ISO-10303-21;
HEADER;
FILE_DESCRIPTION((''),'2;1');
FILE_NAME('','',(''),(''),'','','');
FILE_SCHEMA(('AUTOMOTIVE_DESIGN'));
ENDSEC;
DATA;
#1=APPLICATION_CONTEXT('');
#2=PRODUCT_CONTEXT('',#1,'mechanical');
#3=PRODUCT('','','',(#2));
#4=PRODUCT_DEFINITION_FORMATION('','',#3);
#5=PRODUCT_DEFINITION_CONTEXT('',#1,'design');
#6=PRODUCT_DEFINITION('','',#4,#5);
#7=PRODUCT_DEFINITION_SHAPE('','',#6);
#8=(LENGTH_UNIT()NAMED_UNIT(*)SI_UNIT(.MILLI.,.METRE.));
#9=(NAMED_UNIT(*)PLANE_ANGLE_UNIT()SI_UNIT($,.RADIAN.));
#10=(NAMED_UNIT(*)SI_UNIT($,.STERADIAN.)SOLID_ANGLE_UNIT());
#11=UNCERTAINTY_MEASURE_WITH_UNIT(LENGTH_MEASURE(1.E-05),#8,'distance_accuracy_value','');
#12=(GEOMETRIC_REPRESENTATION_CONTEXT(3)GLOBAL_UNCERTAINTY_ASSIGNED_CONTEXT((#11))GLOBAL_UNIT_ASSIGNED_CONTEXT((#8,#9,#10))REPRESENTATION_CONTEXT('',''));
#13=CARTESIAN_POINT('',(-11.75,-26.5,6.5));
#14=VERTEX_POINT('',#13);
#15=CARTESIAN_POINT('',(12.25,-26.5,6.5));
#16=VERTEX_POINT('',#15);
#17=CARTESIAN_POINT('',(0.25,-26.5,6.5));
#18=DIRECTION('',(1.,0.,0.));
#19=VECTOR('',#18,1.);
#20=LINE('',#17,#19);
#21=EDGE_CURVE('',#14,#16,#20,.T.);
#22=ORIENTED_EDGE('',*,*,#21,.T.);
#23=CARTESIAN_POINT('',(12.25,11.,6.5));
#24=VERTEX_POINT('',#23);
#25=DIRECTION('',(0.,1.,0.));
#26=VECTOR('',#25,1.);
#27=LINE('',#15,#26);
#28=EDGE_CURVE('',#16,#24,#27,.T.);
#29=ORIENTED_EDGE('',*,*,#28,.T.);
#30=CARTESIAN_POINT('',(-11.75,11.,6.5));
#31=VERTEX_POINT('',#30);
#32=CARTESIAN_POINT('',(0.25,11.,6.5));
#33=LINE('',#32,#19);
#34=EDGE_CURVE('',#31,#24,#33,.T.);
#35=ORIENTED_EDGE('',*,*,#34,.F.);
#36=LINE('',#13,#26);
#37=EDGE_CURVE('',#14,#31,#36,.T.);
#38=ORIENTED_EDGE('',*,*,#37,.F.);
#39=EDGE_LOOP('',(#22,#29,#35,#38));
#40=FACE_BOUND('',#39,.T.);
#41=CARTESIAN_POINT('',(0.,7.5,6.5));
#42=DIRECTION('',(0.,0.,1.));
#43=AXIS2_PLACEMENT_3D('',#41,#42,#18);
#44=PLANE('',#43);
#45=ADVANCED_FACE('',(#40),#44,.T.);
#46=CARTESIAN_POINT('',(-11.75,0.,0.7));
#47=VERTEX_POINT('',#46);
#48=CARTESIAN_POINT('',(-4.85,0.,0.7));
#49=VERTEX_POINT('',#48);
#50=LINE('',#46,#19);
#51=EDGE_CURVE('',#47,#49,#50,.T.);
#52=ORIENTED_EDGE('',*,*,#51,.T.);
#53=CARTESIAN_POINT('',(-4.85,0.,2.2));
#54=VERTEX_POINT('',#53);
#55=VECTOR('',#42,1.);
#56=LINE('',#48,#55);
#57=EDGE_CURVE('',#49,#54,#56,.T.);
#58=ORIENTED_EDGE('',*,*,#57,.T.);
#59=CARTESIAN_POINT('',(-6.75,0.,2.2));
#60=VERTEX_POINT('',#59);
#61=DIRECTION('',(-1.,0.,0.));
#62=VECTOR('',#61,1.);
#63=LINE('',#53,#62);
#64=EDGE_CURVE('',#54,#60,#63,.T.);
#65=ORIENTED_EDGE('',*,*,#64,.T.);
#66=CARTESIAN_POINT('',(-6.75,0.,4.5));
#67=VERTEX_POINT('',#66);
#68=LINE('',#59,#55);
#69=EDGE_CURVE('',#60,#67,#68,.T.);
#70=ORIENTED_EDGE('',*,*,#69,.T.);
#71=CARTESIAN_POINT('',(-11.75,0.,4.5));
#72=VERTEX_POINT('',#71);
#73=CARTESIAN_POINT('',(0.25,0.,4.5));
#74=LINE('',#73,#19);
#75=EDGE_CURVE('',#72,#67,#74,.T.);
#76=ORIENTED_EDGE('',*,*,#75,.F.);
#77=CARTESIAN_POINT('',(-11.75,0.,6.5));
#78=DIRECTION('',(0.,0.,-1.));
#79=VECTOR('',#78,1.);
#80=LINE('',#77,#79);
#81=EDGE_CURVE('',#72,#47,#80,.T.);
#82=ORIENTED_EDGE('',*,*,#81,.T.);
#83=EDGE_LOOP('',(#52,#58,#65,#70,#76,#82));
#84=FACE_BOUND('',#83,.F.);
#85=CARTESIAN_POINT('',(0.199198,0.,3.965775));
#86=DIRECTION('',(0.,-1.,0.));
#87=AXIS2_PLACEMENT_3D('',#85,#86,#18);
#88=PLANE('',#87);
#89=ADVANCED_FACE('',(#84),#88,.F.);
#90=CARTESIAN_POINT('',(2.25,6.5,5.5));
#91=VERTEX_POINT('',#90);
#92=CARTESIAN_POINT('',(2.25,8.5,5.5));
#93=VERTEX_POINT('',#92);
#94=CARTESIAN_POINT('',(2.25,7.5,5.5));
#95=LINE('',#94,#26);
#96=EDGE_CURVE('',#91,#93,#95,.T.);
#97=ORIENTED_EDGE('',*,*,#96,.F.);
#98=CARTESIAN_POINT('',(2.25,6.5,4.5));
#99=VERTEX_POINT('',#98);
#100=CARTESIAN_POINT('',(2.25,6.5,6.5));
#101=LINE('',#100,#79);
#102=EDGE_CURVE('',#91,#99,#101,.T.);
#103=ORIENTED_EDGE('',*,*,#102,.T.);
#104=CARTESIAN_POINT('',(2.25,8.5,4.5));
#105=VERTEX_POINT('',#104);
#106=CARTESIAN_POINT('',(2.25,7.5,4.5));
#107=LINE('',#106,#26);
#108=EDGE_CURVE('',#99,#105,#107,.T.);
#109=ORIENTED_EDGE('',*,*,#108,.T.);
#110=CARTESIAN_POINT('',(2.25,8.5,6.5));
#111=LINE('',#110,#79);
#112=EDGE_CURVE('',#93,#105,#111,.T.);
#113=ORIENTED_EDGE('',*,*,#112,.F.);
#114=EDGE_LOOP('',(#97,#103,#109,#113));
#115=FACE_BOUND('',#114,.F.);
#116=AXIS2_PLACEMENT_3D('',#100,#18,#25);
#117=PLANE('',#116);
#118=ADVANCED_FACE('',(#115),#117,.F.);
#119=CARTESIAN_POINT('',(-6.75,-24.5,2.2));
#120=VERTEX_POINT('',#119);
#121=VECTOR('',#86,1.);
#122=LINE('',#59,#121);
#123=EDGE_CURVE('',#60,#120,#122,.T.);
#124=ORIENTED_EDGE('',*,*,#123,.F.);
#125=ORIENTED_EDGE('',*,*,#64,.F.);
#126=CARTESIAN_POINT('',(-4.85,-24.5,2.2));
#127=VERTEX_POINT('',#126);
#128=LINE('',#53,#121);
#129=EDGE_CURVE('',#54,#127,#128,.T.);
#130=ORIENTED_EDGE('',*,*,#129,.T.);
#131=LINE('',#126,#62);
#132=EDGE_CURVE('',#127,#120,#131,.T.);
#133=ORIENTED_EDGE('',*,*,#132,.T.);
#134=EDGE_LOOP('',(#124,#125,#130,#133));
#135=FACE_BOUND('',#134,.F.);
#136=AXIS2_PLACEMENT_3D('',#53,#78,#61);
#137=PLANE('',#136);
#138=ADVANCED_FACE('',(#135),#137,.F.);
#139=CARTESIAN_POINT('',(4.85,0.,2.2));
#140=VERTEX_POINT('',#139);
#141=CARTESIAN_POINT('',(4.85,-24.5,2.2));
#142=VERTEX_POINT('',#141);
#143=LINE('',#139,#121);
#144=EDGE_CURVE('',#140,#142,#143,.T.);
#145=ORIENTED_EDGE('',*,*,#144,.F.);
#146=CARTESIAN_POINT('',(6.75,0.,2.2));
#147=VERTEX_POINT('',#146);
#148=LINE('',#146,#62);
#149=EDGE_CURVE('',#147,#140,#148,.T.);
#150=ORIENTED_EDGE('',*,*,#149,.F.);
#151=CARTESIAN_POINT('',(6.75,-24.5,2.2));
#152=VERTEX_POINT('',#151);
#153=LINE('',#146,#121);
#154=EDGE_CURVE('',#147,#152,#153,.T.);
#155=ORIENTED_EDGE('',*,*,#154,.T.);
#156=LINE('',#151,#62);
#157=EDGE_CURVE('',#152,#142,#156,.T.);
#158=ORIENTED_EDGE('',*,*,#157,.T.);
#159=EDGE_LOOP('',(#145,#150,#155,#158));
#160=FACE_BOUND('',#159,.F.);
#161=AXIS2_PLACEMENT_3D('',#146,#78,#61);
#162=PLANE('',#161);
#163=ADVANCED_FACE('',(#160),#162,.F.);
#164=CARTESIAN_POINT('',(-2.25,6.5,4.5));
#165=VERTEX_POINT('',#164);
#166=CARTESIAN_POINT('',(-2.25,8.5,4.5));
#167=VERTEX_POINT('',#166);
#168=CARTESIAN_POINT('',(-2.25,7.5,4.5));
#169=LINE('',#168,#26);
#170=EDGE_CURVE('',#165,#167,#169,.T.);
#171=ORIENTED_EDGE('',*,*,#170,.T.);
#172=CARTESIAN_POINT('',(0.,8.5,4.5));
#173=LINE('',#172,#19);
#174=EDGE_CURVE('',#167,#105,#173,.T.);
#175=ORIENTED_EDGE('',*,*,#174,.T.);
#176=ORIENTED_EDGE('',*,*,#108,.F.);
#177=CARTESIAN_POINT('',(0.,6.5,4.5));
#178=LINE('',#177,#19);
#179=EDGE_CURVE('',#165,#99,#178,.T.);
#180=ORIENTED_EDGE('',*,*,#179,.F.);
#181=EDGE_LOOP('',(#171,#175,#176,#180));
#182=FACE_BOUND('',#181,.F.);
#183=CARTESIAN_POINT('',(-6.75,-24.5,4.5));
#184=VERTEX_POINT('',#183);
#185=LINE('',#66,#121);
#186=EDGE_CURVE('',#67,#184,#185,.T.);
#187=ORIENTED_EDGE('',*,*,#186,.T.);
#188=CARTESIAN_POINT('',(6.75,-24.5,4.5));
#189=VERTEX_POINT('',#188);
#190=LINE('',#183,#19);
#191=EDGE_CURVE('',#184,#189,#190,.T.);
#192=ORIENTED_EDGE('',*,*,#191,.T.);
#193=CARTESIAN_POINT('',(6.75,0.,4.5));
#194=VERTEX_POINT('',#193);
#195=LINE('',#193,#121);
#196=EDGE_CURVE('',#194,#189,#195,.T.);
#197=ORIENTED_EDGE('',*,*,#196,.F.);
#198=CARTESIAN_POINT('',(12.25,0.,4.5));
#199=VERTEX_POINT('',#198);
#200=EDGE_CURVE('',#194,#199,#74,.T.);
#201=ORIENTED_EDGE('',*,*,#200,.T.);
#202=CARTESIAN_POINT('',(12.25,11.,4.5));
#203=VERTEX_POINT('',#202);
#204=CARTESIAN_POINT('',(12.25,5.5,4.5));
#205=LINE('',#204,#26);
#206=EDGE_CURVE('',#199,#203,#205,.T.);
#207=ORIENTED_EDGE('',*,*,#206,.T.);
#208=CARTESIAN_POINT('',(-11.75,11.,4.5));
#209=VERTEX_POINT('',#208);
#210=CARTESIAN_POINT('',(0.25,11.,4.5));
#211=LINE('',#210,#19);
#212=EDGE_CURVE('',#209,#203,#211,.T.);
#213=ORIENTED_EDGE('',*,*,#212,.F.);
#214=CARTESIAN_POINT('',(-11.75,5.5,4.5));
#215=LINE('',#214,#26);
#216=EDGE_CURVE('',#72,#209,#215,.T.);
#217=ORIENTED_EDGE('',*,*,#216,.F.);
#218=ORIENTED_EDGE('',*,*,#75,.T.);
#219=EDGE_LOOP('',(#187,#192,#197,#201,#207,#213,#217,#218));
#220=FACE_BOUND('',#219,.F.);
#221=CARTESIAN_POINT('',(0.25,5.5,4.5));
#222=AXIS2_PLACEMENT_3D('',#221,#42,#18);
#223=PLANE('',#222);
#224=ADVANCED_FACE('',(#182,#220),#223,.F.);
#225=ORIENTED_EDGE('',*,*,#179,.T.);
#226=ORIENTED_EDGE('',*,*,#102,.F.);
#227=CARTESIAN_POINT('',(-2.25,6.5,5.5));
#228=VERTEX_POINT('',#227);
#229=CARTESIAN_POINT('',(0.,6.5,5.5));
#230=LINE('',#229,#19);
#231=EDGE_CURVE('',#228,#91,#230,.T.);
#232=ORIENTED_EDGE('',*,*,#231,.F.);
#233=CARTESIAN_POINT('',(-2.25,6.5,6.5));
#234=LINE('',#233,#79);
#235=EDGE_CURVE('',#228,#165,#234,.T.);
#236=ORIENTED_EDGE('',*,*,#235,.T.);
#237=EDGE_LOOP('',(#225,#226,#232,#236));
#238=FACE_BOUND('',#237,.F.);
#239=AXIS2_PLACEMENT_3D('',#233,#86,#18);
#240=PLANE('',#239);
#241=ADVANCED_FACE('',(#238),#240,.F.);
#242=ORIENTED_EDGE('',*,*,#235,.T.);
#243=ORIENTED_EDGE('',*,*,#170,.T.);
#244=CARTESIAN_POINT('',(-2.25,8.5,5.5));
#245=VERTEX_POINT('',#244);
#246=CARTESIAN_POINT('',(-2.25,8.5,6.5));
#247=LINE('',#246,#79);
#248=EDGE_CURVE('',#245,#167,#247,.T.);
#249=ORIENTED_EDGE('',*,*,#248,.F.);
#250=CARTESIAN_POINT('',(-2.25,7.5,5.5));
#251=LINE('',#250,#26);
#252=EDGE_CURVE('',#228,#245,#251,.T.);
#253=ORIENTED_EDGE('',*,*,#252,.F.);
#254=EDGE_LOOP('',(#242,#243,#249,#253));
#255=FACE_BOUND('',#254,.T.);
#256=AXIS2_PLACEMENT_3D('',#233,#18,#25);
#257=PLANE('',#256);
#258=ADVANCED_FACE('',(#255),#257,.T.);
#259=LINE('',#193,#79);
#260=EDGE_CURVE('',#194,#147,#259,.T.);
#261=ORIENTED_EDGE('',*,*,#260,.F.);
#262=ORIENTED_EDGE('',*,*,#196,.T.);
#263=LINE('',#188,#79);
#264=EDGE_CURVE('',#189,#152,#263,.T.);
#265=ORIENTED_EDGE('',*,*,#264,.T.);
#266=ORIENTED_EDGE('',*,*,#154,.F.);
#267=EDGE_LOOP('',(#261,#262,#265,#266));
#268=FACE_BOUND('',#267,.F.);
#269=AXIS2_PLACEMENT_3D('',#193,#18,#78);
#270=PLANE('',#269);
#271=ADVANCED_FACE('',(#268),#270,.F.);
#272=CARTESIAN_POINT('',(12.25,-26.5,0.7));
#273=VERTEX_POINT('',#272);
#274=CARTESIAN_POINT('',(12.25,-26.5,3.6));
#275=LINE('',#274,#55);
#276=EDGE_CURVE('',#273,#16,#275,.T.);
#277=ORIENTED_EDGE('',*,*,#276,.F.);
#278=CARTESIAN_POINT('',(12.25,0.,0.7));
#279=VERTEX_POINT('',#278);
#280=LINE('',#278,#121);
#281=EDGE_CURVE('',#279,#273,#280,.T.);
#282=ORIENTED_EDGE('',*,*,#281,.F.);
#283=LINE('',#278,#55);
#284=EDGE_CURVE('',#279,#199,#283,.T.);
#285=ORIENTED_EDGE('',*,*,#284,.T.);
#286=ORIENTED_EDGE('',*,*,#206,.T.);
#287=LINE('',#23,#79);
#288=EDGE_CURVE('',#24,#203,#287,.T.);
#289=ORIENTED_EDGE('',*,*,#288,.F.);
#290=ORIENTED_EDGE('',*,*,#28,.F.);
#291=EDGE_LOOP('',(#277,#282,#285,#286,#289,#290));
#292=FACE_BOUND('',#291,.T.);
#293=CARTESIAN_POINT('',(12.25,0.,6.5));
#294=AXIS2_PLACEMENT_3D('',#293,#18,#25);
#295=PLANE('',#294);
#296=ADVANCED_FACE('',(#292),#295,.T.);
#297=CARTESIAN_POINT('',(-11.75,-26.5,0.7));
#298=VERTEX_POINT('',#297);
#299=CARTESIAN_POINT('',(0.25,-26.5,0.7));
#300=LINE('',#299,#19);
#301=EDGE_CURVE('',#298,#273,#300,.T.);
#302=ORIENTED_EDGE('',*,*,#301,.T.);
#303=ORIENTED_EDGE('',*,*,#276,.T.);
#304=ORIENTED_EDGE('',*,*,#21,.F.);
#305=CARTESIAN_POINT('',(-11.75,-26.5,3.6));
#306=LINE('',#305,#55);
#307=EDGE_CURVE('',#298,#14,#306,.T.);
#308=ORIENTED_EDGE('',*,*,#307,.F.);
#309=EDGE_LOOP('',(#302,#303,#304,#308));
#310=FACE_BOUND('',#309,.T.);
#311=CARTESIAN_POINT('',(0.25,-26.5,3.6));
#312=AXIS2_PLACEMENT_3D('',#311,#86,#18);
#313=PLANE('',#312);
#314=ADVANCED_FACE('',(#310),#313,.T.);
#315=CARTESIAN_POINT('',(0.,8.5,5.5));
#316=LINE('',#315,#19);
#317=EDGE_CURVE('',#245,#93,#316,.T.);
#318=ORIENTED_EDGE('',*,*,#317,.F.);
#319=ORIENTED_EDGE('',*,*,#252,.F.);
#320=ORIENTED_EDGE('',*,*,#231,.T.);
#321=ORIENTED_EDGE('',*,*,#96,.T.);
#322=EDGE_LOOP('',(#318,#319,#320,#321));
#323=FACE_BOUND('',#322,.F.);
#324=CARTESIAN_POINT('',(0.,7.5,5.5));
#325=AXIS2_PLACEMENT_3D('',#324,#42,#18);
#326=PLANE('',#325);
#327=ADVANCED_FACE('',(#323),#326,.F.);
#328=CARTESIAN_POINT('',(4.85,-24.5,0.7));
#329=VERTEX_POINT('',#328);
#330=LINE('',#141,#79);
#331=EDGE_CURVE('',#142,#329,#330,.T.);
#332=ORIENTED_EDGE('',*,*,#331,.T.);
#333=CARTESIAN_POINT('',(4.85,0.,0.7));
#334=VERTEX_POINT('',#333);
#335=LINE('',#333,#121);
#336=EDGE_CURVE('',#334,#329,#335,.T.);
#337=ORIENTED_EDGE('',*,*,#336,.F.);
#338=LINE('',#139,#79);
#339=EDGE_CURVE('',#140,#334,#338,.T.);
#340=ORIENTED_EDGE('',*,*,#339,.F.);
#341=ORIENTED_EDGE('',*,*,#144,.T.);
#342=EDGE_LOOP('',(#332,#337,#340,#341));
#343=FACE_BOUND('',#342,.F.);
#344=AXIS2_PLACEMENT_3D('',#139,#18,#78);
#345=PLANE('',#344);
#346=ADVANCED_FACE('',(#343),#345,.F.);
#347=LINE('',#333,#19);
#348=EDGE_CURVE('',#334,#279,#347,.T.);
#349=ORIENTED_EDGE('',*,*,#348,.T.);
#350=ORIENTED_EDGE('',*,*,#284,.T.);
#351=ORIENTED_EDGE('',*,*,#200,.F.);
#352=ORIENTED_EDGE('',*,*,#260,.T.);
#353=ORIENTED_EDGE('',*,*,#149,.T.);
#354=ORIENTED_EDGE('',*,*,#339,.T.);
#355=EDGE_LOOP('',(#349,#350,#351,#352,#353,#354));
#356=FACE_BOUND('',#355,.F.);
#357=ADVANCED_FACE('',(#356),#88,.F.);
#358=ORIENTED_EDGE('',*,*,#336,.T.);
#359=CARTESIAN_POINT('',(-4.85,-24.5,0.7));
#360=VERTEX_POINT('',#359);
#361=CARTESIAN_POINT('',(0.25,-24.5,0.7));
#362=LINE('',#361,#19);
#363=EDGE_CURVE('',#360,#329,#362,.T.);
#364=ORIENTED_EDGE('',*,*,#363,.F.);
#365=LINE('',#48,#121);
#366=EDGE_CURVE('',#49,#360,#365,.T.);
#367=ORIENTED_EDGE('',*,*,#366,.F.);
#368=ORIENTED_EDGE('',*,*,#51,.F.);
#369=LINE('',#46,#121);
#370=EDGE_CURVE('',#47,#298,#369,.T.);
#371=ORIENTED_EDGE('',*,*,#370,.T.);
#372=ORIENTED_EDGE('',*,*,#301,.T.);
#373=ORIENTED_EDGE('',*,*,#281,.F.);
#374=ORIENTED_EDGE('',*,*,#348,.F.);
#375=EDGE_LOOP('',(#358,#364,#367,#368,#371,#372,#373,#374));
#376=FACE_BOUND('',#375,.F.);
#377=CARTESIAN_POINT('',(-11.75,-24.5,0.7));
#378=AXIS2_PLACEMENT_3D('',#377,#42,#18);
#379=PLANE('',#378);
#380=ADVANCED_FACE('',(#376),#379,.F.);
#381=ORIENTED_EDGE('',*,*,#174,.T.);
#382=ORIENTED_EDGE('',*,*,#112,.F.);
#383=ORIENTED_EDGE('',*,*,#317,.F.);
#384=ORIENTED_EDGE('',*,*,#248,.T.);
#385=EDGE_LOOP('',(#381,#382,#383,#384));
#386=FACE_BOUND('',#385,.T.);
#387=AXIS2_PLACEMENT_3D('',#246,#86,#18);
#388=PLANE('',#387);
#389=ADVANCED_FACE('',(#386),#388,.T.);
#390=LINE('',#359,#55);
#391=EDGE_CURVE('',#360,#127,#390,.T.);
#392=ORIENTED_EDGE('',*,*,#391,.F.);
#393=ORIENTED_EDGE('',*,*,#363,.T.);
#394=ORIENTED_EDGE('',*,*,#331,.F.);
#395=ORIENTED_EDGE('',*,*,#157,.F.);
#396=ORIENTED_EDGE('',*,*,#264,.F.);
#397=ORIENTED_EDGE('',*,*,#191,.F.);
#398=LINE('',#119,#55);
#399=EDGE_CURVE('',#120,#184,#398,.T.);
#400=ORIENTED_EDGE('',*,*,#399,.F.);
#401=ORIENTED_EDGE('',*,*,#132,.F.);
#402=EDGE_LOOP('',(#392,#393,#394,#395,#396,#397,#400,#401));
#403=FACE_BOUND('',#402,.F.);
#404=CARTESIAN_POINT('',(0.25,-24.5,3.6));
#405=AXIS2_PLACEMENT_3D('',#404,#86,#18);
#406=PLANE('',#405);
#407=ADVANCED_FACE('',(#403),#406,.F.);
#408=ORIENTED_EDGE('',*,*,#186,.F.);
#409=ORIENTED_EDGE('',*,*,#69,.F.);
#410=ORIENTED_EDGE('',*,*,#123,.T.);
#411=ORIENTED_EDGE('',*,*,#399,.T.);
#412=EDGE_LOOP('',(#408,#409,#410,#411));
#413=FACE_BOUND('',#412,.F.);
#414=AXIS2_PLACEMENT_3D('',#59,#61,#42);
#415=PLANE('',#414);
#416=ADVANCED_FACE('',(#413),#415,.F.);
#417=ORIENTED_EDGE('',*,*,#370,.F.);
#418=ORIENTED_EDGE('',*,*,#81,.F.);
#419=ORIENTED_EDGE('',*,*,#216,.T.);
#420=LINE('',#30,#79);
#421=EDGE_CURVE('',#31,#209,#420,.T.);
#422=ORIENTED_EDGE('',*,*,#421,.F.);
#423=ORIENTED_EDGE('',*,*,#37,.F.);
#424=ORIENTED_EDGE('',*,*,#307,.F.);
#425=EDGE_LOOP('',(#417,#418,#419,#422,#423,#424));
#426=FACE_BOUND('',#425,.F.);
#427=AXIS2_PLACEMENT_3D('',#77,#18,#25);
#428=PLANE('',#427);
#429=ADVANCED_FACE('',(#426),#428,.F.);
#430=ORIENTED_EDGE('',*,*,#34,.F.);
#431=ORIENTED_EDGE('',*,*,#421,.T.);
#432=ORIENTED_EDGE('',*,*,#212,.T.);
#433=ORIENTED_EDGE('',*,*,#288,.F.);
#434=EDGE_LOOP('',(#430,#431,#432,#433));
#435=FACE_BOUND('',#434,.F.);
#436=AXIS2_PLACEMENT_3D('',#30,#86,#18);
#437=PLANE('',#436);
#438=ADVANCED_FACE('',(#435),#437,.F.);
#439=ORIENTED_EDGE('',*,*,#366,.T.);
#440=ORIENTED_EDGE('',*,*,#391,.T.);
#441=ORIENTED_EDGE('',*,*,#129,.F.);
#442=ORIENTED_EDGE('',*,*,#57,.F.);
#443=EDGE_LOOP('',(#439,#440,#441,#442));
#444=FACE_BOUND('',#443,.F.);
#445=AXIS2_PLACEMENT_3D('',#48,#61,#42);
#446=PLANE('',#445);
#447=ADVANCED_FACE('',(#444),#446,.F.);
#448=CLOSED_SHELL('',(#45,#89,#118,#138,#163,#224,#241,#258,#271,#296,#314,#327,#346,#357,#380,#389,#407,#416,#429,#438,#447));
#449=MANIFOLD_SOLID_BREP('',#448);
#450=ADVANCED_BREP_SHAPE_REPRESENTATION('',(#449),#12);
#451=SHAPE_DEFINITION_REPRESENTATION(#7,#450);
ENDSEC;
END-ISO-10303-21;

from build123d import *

# Parameters (mm, degrees)
F1_DEPTH = 24.5
F2_W     = 24
F2_H     = 5.8
F3_DEPTH = 2
F4_W     = 24
F4_H     = 11
F4_W_2   = 4.5
F4_H_2   = 2
F5_DEPTH = 2
F6_DEPTH = 1


# Not quite as in the source:
# - a feature of the source that left no trace in its solid (it failed there, or was rolled back) is left out


with BuildPart() as f1:
    # F0 (on Front) → F1 (new body)
    with BuildSketch(Plane.XZ):
        Polygon((-6.75, 2.2), (-6.75, 4.5), (-4.85, 4.5), (-3.2, 4.5), (3.2, 4.5), (4.85, 4.5), (6.75, 4.5), (6.75, 2.2), (4.85, 2.2), (4.85, 0.7), (12.25, 0.7), (12.25, 6.5), (-11.75, 6.5), (-11.75, 0.7), (-4.85, 0.7), (-4.85, 2.2), align=None)
    extrude(amount=F1_DEPTH)

    # F2 (on face) → F3 (join)
    with BuildSketch(Plane.XZ.offset(24.5)):
        with Locations((0.25, 3.6)):
            Rectangle(F2_W, F2_H)
    extrude(amount=F3_DEPTH)

    # F4 (on face) → F5 (join)
    with BuildSketch(Plane.XY.offset(6.5)):
        with Locations((0.25, 5.5)):
            Rectangle(F4_W, F4_H)
        with Locations((0, 7.5)):
            Rectangle(F4_W_2, F4_H_2, mode=Mode.SUBTRACT)
    extrude(amount=-F5_DEPTH)

    # F4 (on face) → F6 (join)
    with BuildSketch(Plane.XY.offset(6.5)):
        with Locations((0, 7.5)):
            Rectangle(F4_W_2, F4_H_2)
    extrude(amount=-F6_DEPTH)


solid = f1.part
